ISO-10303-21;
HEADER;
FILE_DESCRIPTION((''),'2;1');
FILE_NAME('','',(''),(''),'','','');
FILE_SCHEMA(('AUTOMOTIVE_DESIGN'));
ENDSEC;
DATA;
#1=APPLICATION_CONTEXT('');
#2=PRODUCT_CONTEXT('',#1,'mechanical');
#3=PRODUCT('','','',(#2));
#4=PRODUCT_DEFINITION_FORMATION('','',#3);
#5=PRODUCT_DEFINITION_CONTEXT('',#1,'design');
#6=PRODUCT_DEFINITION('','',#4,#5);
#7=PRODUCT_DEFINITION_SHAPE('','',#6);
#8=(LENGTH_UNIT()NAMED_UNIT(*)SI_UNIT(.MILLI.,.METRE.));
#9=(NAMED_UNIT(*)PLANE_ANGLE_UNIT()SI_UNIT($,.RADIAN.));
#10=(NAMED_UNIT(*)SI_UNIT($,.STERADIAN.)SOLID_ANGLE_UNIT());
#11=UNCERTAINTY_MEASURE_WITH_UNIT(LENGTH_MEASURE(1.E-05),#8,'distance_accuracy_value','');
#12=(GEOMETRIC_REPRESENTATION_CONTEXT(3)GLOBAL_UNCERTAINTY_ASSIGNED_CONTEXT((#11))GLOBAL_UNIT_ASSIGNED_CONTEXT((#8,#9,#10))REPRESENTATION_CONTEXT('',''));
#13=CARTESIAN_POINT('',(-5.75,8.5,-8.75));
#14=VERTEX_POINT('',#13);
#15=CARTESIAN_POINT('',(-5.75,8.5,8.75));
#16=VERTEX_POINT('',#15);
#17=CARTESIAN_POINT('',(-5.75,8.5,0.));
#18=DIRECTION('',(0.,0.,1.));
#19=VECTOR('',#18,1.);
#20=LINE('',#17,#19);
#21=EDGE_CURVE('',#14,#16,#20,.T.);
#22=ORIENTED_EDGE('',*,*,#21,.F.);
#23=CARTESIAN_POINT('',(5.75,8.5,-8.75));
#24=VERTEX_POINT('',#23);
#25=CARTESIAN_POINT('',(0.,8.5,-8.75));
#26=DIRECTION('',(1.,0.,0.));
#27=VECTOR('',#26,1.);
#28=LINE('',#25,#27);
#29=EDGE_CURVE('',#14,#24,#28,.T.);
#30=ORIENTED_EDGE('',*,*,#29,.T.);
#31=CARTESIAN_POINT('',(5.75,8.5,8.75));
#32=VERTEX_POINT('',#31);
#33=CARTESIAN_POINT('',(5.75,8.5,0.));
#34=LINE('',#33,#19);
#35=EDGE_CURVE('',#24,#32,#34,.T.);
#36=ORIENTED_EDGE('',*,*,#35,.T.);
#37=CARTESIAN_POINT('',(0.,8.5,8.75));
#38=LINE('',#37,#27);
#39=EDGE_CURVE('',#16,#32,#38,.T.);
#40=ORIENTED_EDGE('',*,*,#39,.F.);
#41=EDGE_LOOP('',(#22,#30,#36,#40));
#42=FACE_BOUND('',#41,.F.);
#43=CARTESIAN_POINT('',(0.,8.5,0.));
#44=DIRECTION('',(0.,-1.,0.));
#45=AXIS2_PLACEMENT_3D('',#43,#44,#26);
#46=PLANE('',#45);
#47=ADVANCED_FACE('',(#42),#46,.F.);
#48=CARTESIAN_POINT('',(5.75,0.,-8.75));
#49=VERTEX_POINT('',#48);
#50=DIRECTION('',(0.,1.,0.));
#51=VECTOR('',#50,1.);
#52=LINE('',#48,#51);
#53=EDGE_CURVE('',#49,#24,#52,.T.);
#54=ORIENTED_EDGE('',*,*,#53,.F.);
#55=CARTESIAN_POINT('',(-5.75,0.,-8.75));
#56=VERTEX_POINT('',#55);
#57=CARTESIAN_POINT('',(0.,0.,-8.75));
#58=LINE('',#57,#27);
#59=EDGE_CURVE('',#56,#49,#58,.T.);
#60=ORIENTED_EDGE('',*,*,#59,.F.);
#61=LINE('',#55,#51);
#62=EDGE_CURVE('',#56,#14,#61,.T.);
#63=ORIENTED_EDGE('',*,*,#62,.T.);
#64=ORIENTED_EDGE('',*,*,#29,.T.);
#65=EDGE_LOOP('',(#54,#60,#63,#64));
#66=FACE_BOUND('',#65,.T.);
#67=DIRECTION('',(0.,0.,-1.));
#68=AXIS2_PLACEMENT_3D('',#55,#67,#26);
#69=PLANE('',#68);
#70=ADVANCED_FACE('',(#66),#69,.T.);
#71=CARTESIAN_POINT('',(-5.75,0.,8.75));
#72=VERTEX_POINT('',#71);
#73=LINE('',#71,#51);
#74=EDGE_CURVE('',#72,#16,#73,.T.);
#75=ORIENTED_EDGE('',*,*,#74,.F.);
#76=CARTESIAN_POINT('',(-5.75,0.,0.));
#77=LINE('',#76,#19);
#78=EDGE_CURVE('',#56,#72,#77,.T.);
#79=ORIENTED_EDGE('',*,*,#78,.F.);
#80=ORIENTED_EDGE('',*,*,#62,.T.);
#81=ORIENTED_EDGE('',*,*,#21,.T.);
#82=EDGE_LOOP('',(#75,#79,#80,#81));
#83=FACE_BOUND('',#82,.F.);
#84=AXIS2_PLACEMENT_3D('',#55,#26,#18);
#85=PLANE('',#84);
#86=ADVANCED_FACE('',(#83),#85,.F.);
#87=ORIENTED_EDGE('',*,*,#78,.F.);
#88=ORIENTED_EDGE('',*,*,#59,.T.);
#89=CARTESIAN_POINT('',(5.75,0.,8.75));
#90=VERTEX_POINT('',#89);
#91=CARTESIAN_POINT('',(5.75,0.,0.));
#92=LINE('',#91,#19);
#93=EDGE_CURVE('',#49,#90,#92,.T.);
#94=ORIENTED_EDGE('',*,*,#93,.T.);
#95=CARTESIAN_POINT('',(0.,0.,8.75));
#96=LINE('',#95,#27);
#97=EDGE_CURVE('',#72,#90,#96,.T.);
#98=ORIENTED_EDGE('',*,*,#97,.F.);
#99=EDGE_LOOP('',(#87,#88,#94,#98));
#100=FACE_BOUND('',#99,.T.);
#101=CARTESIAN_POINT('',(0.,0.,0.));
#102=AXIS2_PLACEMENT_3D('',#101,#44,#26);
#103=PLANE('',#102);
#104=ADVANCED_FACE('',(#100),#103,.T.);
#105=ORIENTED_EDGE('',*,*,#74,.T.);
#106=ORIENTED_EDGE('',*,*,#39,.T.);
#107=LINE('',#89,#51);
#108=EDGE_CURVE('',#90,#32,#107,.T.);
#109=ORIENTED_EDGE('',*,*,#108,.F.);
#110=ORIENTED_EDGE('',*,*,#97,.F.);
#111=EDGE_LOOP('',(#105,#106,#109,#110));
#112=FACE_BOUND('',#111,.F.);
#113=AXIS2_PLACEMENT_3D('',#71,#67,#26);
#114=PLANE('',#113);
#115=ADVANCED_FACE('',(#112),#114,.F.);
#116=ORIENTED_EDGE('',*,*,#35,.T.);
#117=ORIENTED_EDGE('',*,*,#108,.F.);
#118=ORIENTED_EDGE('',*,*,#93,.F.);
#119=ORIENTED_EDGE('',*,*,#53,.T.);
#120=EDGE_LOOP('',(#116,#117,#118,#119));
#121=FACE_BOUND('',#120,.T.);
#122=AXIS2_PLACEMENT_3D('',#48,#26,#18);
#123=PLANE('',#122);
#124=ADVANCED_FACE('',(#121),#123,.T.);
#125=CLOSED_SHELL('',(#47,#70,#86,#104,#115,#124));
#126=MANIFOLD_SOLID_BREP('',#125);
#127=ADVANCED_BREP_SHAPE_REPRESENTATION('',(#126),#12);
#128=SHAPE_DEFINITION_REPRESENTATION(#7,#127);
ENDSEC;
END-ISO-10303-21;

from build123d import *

# Parameters (mm, degrees)
F0_W     = 11.5
F0_H     = 17.5
F1_DEPTH = 8.5


# Not quite as in the source:
# - the program builds the solid bodies; features that only make, move or delete a surface that nothing else refers to are left out


with BuildPart() as f1:
    # F0 (on Front) → F1 (new body)
    with BuildSketch(Plane.XZ):
        Rectangle(F0_W, F0_H)
    extrude(amount=-F1_DEPTH)


solid = f1.part
